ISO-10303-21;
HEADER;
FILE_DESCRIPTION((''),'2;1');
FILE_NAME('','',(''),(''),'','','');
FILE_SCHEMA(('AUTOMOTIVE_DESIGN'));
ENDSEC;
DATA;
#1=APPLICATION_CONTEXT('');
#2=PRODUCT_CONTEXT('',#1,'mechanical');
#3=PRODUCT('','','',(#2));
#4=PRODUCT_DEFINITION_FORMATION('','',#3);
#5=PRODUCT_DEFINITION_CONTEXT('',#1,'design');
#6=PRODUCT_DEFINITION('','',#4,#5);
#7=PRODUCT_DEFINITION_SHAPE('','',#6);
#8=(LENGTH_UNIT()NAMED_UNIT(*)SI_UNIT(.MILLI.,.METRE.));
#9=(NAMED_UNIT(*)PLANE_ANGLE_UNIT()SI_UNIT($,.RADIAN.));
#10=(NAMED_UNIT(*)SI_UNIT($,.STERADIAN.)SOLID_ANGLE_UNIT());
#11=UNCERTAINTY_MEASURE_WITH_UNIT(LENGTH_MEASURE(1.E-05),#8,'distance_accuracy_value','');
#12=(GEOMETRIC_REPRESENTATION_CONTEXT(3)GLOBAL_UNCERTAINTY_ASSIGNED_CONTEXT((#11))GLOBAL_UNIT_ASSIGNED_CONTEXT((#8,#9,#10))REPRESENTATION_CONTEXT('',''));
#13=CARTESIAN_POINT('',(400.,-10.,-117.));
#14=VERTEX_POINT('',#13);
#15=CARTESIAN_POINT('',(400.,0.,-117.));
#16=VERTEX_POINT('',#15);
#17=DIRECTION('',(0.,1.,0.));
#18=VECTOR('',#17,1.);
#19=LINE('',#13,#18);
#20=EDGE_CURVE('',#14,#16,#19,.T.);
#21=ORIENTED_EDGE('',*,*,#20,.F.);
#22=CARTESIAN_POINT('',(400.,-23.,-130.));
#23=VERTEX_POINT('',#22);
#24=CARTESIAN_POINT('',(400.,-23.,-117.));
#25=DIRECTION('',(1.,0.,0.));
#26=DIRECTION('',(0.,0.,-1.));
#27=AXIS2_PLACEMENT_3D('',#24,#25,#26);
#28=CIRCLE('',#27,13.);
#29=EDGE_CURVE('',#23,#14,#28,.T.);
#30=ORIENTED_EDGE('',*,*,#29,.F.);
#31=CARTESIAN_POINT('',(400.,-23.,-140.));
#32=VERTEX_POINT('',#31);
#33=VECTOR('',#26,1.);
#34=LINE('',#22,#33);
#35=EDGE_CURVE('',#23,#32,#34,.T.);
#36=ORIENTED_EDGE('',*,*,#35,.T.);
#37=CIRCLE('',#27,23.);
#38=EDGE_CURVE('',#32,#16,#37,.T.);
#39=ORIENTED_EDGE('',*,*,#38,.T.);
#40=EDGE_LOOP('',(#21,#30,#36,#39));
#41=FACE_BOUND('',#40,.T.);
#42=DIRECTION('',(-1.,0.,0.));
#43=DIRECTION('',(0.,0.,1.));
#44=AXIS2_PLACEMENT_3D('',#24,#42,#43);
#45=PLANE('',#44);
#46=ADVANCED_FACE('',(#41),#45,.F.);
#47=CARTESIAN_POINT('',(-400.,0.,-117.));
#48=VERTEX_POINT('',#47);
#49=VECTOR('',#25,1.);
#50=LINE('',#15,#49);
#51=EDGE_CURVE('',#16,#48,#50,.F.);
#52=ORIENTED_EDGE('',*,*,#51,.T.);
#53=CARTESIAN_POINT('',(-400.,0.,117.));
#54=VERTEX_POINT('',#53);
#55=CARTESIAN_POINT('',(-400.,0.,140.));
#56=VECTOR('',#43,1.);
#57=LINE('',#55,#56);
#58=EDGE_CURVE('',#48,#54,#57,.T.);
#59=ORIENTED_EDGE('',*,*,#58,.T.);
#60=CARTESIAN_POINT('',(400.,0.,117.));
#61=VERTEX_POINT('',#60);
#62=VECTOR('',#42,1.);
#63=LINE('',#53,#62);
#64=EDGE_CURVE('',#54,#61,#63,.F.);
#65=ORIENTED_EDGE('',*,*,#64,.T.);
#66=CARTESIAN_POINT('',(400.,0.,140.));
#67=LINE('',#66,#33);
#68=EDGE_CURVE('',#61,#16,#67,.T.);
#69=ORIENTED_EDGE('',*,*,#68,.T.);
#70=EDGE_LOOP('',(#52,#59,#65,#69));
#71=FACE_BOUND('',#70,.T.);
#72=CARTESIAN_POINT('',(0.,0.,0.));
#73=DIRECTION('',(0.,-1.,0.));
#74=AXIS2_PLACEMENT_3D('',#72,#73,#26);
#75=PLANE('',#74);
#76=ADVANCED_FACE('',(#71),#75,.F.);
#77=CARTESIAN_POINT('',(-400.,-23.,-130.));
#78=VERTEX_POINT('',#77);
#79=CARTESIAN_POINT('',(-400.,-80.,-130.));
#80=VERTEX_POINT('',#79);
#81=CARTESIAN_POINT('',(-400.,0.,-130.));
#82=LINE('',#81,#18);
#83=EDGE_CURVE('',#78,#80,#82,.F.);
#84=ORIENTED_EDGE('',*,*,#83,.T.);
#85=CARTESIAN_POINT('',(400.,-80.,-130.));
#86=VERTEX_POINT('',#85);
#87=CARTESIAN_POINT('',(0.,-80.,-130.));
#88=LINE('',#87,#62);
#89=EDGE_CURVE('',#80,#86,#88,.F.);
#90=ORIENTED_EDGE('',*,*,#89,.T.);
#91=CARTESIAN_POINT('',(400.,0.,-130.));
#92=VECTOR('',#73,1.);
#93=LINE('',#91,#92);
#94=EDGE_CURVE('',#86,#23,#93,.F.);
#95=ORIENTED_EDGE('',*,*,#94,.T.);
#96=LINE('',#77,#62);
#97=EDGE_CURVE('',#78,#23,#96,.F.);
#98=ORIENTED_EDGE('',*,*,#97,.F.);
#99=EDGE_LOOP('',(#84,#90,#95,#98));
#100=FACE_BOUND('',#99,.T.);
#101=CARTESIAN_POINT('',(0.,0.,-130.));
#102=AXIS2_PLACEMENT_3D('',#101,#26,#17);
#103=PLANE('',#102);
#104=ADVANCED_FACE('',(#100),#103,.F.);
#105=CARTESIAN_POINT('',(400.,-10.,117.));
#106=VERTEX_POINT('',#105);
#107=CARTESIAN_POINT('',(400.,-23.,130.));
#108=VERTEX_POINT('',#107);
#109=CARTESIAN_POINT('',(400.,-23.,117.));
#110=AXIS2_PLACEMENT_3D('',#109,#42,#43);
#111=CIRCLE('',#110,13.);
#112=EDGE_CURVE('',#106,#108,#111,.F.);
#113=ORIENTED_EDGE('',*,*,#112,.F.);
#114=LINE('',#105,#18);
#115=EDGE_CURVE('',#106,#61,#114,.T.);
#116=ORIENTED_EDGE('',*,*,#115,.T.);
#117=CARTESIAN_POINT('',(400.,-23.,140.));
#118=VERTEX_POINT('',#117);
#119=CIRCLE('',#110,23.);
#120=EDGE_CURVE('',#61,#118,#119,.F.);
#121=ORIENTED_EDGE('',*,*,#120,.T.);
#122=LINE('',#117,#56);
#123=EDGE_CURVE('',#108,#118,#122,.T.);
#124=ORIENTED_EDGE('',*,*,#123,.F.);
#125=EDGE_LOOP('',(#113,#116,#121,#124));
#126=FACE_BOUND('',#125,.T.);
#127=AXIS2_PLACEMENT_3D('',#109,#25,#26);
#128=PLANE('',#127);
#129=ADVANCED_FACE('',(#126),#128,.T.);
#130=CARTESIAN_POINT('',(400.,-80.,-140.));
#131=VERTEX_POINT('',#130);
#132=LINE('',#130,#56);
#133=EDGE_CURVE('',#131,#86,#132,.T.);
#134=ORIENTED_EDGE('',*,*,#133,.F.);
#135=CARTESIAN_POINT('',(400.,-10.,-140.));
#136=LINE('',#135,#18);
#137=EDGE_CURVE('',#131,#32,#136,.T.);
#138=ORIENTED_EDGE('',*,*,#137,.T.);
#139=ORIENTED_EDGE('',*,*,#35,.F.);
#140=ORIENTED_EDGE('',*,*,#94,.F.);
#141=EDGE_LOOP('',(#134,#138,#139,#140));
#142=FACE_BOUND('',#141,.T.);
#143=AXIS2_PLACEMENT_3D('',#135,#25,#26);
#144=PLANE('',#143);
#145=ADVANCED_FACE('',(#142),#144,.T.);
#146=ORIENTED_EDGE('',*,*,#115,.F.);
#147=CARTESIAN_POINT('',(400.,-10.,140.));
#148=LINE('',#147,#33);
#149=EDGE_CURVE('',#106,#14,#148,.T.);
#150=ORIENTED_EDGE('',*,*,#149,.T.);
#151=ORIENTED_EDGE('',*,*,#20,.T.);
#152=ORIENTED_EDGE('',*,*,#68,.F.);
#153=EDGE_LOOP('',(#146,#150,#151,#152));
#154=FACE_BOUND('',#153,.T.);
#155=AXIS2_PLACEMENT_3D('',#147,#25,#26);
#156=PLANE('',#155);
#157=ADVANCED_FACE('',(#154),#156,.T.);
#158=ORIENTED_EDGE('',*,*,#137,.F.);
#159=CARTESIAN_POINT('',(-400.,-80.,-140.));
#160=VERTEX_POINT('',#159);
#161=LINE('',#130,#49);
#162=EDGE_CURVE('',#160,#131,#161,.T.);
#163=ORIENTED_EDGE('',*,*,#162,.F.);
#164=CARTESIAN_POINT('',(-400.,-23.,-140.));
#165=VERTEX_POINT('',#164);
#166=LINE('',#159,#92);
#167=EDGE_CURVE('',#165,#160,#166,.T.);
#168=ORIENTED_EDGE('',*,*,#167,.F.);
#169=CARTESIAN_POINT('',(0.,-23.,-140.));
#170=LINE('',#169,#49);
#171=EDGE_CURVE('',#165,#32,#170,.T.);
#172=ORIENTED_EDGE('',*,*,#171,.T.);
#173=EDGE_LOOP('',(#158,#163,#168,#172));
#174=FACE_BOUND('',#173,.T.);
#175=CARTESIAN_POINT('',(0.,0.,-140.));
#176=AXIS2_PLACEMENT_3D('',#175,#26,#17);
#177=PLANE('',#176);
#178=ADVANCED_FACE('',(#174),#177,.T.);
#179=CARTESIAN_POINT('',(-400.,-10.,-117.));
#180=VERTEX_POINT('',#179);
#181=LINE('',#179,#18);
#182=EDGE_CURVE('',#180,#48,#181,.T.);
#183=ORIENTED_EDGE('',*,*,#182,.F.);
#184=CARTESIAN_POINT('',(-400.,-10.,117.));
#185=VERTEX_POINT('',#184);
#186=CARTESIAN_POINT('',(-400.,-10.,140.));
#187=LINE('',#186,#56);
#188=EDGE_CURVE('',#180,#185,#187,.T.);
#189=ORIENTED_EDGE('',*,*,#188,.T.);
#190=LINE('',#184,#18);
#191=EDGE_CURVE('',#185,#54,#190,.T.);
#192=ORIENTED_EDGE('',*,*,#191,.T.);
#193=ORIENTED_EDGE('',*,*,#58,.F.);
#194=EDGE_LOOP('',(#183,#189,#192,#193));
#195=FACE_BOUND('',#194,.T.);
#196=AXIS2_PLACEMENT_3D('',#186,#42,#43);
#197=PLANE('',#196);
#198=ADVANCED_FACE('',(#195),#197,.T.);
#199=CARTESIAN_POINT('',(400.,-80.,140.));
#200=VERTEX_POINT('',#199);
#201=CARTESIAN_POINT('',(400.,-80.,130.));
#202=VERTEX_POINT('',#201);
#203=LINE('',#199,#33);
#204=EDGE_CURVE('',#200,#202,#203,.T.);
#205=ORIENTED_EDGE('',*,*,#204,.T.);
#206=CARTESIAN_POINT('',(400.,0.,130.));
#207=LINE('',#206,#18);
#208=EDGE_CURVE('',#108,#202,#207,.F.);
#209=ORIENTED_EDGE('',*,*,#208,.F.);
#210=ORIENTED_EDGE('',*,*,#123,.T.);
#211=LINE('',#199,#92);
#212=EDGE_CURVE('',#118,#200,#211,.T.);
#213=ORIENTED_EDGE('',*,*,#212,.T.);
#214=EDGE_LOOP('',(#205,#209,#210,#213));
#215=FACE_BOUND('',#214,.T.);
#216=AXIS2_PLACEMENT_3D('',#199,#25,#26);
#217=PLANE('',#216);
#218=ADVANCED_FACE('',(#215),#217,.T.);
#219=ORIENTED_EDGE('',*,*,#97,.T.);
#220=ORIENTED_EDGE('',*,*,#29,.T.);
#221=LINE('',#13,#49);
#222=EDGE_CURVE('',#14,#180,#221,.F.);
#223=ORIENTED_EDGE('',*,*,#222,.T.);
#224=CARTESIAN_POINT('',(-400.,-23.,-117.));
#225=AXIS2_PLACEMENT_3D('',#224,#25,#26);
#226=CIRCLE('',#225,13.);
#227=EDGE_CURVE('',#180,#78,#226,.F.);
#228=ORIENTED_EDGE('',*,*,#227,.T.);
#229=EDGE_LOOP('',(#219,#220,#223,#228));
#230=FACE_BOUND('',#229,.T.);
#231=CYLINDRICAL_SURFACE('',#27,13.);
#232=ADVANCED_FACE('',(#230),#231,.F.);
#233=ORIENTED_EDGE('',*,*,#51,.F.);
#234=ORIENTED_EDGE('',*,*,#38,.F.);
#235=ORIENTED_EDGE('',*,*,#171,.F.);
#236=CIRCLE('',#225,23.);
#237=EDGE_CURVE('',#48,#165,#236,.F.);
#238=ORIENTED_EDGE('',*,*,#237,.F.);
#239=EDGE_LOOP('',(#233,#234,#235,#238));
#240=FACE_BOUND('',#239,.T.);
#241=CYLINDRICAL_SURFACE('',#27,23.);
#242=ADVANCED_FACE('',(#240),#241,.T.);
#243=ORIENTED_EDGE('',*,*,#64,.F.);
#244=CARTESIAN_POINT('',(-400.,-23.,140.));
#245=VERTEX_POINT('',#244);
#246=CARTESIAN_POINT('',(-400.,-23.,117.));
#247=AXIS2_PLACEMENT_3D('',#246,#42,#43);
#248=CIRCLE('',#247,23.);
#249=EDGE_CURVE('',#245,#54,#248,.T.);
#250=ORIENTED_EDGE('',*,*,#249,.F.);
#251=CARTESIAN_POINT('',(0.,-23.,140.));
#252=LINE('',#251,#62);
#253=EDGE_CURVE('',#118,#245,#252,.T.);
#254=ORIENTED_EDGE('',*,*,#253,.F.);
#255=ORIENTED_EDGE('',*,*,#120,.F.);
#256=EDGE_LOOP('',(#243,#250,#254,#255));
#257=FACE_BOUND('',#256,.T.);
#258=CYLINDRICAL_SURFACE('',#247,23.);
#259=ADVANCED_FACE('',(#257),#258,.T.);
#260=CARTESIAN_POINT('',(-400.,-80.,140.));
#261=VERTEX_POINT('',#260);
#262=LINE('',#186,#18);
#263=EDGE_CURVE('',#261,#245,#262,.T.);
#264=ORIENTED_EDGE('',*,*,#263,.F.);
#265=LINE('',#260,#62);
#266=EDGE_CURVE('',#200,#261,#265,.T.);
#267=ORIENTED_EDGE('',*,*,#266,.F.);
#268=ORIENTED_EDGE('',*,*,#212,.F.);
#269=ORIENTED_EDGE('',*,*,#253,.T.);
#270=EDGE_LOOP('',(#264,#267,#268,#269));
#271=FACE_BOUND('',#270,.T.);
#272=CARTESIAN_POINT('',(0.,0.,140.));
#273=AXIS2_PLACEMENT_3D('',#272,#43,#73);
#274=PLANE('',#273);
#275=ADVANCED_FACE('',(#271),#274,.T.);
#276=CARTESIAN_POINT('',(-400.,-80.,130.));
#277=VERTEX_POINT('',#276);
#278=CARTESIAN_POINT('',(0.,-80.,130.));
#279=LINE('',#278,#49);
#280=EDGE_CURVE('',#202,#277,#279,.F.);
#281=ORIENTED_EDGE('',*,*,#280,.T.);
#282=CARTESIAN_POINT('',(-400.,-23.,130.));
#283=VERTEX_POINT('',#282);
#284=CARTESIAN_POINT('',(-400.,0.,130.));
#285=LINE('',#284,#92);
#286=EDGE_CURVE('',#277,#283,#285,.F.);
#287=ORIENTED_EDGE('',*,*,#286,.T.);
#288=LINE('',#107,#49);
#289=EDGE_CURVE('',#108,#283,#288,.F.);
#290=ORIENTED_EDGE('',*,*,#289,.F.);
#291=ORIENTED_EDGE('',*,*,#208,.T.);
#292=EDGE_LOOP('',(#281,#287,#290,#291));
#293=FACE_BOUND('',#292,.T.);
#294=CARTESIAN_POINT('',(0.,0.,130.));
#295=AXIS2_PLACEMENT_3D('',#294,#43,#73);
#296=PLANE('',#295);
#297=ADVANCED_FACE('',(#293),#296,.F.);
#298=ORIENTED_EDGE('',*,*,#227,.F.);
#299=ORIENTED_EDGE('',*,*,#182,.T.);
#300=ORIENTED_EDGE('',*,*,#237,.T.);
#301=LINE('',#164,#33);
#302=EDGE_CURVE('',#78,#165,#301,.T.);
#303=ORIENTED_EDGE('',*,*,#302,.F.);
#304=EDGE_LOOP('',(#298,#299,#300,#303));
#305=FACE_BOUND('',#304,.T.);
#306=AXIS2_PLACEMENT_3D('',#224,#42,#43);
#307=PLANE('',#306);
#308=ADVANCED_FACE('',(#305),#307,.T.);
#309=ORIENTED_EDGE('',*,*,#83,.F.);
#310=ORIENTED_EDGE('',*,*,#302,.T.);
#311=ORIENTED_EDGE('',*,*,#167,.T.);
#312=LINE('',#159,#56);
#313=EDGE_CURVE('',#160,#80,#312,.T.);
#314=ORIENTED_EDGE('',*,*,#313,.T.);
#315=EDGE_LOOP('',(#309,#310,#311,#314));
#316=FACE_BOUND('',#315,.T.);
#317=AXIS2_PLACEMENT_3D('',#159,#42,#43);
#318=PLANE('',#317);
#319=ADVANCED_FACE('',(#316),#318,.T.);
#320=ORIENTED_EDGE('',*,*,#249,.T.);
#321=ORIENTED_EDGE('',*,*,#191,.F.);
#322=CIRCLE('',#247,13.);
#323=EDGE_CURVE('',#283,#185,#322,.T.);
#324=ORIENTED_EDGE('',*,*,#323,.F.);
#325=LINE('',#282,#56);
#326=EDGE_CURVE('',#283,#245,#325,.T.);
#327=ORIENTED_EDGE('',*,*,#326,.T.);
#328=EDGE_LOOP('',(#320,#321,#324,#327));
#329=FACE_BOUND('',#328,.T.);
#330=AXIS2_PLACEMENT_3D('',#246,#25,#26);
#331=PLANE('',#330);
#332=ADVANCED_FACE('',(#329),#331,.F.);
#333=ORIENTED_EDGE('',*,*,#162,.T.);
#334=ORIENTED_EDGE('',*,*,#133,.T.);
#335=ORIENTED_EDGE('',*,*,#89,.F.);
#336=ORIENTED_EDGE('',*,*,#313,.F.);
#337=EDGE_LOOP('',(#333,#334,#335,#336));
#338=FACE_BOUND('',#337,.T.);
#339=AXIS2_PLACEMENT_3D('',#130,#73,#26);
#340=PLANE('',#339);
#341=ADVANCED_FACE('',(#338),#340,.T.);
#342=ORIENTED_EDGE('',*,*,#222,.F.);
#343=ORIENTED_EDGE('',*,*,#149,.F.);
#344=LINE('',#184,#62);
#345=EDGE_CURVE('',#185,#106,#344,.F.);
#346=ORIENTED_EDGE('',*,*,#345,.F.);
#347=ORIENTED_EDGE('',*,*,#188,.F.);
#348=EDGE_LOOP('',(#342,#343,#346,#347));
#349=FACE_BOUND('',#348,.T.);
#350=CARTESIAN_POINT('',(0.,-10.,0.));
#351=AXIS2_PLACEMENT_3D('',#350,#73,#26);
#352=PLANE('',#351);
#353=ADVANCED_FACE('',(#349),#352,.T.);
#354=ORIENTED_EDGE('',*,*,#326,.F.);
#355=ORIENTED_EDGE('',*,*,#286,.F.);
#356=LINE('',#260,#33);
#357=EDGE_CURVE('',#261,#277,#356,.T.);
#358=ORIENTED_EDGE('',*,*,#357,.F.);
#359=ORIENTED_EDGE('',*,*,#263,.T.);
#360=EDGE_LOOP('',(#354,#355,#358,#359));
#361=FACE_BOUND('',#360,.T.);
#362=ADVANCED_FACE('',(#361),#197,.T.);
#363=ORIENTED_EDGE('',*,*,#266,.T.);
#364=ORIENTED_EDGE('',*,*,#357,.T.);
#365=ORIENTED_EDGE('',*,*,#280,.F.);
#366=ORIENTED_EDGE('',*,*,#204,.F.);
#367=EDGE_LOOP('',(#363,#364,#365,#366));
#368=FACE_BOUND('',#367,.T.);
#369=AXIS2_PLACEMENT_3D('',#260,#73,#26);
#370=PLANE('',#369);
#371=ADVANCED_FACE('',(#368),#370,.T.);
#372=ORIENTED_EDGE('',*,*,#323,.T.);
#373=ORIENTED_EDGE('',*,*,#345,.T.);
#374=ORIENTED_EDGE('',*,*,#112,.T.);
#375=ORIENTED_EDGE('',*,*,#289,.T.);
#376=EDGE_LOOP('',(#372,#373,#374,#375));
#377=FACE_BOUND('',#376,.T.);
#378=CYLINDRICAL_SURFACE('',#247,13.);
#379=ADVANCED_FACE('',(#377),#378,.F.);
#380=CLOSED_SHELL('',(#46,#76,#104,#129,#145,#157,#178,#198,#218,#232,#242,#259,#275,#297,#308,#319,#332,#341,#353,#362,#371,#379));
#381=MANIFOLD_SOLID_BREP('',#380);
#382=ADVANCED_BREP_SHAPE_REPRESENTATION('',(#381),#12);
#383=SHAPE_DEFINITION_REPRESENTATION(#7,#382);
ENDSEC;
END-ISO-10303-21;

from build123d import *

# Parameters (mm, degrees)
SKETCH1_W                      = 800
SKETCH1_H                      = 280
BASE_FLANGE1_DEPTH             = 10
EDGE_FLANGE1_STRIP_W           = 66
EDGE_FLANGE1_STRIP_H           = 10
EDGE_FLANGE1_STRIP_CUT_DEPTH   = 800
EDGE_FLANGE1_STRIP_2_W         = 66
EDGE_FLANGE1_STRIP_2_H         = 10
EDGE_FLANGE1_STRIP_CUT_2_DEPTH = 800
EDGE_FLANGE1_DEPTH             = 800
EDGE_FLANGE1_BEND_DEPTH        = 800


# Sheet-metal steps are written as plain solids
with BuildPart() as part:
    # Sketch1 → Base-Flange1 (new body)
    with BuildSketch(Plane(origin=(0, 0, 0), x_dir=(1, 0, 0), z_dir=(0, 1, 0))):
        Rectangle(SKETCH1_W, SKETCH1_H)
    extrude(amount=-BASE_FLANGE1_DEPTH)

    # Edge-Flange1 strip (across the edge) → Edge-Flange1 strip cut (cut)
    with BuildSketch(Plane(origin=(400, -10, 140), x_dir=(0, 0, -1), z_dir=(-1, 0, 0))):
        with Locations((-10, -5)):
            Rectangle(EDGE_FLANGE1_STRIP_W, EDGE_FLANGE1_STRIP_H)
    extrude(amount=EDGE_FLANGE1_STRIP_CUT_DEPTH, mode=Mode.SUBTRACT)

    # Edge-Flange1 strip 2 (across the edge) → Edge-Flange1 strip cut 2 (cut)
    with BuildSketch(Plane(origin=(-400, -10, -140), x_dir=(0, 0, 1), z_dir=(1, 0, 0))):
        with Locations((-10, -5)):
            Rectangle(EDGE_FLANGE1_STRIP_2_W, EDGE_FLANGE1_STRIP_2_H)
    extrude(amount=EDGE_FLANGE1_STRIP_CUT_2_DEPTH, mode=Mode.SUBTRACT)

    # Edge-Flange1 section (across the edge) → Edge-Flange1 (add)
    with BuildSketch(Plane(origin=(400, -10, 140), x_dir=(0, 0, -1), z_dir=(-1, 0, 0))):
        with BuildLine():
            Line((0, 13), (0, 70))
            Line((0, 70), (10, 70))
            Line((10, 70), (10, 13))
            ThreePointArc((10, 13), (13.807611845, 3.807611845), (23, 0))
            Line((23, 0), (23, -10))
            ThreePointArc((23, -10), (6.736544033, -3.263455967), (0, 13))
        make_face()
    extrude(amount=EDGE_FLANGE1_DEPTH)

    # Edge-Flange1 section 2 (across the edge) → Edge-Flange1 bend (add)
    with BuildSketch(Plane(origin=(-400, -10, -140), x_dir=(0, 0, 1), z_dir=(1, 0, 0))):
        with BuildLine():
            Line((0, 13), (0, 70))
            Line((0, 70), (10, 70))
            Line((10, 70), (10, 13))
            ThreePointArc((10, 13), (13.807611845, 3.807611845), (23, 0))
            Line((23, 0), (23, -10))
            ThreePointArc((23, -10), (6.736544033, -3.263455967), (0, 13))
        make_face()
    extrude(amount=EDGE_FLANGE1_BEND_DEPTH)


solid = part.part
